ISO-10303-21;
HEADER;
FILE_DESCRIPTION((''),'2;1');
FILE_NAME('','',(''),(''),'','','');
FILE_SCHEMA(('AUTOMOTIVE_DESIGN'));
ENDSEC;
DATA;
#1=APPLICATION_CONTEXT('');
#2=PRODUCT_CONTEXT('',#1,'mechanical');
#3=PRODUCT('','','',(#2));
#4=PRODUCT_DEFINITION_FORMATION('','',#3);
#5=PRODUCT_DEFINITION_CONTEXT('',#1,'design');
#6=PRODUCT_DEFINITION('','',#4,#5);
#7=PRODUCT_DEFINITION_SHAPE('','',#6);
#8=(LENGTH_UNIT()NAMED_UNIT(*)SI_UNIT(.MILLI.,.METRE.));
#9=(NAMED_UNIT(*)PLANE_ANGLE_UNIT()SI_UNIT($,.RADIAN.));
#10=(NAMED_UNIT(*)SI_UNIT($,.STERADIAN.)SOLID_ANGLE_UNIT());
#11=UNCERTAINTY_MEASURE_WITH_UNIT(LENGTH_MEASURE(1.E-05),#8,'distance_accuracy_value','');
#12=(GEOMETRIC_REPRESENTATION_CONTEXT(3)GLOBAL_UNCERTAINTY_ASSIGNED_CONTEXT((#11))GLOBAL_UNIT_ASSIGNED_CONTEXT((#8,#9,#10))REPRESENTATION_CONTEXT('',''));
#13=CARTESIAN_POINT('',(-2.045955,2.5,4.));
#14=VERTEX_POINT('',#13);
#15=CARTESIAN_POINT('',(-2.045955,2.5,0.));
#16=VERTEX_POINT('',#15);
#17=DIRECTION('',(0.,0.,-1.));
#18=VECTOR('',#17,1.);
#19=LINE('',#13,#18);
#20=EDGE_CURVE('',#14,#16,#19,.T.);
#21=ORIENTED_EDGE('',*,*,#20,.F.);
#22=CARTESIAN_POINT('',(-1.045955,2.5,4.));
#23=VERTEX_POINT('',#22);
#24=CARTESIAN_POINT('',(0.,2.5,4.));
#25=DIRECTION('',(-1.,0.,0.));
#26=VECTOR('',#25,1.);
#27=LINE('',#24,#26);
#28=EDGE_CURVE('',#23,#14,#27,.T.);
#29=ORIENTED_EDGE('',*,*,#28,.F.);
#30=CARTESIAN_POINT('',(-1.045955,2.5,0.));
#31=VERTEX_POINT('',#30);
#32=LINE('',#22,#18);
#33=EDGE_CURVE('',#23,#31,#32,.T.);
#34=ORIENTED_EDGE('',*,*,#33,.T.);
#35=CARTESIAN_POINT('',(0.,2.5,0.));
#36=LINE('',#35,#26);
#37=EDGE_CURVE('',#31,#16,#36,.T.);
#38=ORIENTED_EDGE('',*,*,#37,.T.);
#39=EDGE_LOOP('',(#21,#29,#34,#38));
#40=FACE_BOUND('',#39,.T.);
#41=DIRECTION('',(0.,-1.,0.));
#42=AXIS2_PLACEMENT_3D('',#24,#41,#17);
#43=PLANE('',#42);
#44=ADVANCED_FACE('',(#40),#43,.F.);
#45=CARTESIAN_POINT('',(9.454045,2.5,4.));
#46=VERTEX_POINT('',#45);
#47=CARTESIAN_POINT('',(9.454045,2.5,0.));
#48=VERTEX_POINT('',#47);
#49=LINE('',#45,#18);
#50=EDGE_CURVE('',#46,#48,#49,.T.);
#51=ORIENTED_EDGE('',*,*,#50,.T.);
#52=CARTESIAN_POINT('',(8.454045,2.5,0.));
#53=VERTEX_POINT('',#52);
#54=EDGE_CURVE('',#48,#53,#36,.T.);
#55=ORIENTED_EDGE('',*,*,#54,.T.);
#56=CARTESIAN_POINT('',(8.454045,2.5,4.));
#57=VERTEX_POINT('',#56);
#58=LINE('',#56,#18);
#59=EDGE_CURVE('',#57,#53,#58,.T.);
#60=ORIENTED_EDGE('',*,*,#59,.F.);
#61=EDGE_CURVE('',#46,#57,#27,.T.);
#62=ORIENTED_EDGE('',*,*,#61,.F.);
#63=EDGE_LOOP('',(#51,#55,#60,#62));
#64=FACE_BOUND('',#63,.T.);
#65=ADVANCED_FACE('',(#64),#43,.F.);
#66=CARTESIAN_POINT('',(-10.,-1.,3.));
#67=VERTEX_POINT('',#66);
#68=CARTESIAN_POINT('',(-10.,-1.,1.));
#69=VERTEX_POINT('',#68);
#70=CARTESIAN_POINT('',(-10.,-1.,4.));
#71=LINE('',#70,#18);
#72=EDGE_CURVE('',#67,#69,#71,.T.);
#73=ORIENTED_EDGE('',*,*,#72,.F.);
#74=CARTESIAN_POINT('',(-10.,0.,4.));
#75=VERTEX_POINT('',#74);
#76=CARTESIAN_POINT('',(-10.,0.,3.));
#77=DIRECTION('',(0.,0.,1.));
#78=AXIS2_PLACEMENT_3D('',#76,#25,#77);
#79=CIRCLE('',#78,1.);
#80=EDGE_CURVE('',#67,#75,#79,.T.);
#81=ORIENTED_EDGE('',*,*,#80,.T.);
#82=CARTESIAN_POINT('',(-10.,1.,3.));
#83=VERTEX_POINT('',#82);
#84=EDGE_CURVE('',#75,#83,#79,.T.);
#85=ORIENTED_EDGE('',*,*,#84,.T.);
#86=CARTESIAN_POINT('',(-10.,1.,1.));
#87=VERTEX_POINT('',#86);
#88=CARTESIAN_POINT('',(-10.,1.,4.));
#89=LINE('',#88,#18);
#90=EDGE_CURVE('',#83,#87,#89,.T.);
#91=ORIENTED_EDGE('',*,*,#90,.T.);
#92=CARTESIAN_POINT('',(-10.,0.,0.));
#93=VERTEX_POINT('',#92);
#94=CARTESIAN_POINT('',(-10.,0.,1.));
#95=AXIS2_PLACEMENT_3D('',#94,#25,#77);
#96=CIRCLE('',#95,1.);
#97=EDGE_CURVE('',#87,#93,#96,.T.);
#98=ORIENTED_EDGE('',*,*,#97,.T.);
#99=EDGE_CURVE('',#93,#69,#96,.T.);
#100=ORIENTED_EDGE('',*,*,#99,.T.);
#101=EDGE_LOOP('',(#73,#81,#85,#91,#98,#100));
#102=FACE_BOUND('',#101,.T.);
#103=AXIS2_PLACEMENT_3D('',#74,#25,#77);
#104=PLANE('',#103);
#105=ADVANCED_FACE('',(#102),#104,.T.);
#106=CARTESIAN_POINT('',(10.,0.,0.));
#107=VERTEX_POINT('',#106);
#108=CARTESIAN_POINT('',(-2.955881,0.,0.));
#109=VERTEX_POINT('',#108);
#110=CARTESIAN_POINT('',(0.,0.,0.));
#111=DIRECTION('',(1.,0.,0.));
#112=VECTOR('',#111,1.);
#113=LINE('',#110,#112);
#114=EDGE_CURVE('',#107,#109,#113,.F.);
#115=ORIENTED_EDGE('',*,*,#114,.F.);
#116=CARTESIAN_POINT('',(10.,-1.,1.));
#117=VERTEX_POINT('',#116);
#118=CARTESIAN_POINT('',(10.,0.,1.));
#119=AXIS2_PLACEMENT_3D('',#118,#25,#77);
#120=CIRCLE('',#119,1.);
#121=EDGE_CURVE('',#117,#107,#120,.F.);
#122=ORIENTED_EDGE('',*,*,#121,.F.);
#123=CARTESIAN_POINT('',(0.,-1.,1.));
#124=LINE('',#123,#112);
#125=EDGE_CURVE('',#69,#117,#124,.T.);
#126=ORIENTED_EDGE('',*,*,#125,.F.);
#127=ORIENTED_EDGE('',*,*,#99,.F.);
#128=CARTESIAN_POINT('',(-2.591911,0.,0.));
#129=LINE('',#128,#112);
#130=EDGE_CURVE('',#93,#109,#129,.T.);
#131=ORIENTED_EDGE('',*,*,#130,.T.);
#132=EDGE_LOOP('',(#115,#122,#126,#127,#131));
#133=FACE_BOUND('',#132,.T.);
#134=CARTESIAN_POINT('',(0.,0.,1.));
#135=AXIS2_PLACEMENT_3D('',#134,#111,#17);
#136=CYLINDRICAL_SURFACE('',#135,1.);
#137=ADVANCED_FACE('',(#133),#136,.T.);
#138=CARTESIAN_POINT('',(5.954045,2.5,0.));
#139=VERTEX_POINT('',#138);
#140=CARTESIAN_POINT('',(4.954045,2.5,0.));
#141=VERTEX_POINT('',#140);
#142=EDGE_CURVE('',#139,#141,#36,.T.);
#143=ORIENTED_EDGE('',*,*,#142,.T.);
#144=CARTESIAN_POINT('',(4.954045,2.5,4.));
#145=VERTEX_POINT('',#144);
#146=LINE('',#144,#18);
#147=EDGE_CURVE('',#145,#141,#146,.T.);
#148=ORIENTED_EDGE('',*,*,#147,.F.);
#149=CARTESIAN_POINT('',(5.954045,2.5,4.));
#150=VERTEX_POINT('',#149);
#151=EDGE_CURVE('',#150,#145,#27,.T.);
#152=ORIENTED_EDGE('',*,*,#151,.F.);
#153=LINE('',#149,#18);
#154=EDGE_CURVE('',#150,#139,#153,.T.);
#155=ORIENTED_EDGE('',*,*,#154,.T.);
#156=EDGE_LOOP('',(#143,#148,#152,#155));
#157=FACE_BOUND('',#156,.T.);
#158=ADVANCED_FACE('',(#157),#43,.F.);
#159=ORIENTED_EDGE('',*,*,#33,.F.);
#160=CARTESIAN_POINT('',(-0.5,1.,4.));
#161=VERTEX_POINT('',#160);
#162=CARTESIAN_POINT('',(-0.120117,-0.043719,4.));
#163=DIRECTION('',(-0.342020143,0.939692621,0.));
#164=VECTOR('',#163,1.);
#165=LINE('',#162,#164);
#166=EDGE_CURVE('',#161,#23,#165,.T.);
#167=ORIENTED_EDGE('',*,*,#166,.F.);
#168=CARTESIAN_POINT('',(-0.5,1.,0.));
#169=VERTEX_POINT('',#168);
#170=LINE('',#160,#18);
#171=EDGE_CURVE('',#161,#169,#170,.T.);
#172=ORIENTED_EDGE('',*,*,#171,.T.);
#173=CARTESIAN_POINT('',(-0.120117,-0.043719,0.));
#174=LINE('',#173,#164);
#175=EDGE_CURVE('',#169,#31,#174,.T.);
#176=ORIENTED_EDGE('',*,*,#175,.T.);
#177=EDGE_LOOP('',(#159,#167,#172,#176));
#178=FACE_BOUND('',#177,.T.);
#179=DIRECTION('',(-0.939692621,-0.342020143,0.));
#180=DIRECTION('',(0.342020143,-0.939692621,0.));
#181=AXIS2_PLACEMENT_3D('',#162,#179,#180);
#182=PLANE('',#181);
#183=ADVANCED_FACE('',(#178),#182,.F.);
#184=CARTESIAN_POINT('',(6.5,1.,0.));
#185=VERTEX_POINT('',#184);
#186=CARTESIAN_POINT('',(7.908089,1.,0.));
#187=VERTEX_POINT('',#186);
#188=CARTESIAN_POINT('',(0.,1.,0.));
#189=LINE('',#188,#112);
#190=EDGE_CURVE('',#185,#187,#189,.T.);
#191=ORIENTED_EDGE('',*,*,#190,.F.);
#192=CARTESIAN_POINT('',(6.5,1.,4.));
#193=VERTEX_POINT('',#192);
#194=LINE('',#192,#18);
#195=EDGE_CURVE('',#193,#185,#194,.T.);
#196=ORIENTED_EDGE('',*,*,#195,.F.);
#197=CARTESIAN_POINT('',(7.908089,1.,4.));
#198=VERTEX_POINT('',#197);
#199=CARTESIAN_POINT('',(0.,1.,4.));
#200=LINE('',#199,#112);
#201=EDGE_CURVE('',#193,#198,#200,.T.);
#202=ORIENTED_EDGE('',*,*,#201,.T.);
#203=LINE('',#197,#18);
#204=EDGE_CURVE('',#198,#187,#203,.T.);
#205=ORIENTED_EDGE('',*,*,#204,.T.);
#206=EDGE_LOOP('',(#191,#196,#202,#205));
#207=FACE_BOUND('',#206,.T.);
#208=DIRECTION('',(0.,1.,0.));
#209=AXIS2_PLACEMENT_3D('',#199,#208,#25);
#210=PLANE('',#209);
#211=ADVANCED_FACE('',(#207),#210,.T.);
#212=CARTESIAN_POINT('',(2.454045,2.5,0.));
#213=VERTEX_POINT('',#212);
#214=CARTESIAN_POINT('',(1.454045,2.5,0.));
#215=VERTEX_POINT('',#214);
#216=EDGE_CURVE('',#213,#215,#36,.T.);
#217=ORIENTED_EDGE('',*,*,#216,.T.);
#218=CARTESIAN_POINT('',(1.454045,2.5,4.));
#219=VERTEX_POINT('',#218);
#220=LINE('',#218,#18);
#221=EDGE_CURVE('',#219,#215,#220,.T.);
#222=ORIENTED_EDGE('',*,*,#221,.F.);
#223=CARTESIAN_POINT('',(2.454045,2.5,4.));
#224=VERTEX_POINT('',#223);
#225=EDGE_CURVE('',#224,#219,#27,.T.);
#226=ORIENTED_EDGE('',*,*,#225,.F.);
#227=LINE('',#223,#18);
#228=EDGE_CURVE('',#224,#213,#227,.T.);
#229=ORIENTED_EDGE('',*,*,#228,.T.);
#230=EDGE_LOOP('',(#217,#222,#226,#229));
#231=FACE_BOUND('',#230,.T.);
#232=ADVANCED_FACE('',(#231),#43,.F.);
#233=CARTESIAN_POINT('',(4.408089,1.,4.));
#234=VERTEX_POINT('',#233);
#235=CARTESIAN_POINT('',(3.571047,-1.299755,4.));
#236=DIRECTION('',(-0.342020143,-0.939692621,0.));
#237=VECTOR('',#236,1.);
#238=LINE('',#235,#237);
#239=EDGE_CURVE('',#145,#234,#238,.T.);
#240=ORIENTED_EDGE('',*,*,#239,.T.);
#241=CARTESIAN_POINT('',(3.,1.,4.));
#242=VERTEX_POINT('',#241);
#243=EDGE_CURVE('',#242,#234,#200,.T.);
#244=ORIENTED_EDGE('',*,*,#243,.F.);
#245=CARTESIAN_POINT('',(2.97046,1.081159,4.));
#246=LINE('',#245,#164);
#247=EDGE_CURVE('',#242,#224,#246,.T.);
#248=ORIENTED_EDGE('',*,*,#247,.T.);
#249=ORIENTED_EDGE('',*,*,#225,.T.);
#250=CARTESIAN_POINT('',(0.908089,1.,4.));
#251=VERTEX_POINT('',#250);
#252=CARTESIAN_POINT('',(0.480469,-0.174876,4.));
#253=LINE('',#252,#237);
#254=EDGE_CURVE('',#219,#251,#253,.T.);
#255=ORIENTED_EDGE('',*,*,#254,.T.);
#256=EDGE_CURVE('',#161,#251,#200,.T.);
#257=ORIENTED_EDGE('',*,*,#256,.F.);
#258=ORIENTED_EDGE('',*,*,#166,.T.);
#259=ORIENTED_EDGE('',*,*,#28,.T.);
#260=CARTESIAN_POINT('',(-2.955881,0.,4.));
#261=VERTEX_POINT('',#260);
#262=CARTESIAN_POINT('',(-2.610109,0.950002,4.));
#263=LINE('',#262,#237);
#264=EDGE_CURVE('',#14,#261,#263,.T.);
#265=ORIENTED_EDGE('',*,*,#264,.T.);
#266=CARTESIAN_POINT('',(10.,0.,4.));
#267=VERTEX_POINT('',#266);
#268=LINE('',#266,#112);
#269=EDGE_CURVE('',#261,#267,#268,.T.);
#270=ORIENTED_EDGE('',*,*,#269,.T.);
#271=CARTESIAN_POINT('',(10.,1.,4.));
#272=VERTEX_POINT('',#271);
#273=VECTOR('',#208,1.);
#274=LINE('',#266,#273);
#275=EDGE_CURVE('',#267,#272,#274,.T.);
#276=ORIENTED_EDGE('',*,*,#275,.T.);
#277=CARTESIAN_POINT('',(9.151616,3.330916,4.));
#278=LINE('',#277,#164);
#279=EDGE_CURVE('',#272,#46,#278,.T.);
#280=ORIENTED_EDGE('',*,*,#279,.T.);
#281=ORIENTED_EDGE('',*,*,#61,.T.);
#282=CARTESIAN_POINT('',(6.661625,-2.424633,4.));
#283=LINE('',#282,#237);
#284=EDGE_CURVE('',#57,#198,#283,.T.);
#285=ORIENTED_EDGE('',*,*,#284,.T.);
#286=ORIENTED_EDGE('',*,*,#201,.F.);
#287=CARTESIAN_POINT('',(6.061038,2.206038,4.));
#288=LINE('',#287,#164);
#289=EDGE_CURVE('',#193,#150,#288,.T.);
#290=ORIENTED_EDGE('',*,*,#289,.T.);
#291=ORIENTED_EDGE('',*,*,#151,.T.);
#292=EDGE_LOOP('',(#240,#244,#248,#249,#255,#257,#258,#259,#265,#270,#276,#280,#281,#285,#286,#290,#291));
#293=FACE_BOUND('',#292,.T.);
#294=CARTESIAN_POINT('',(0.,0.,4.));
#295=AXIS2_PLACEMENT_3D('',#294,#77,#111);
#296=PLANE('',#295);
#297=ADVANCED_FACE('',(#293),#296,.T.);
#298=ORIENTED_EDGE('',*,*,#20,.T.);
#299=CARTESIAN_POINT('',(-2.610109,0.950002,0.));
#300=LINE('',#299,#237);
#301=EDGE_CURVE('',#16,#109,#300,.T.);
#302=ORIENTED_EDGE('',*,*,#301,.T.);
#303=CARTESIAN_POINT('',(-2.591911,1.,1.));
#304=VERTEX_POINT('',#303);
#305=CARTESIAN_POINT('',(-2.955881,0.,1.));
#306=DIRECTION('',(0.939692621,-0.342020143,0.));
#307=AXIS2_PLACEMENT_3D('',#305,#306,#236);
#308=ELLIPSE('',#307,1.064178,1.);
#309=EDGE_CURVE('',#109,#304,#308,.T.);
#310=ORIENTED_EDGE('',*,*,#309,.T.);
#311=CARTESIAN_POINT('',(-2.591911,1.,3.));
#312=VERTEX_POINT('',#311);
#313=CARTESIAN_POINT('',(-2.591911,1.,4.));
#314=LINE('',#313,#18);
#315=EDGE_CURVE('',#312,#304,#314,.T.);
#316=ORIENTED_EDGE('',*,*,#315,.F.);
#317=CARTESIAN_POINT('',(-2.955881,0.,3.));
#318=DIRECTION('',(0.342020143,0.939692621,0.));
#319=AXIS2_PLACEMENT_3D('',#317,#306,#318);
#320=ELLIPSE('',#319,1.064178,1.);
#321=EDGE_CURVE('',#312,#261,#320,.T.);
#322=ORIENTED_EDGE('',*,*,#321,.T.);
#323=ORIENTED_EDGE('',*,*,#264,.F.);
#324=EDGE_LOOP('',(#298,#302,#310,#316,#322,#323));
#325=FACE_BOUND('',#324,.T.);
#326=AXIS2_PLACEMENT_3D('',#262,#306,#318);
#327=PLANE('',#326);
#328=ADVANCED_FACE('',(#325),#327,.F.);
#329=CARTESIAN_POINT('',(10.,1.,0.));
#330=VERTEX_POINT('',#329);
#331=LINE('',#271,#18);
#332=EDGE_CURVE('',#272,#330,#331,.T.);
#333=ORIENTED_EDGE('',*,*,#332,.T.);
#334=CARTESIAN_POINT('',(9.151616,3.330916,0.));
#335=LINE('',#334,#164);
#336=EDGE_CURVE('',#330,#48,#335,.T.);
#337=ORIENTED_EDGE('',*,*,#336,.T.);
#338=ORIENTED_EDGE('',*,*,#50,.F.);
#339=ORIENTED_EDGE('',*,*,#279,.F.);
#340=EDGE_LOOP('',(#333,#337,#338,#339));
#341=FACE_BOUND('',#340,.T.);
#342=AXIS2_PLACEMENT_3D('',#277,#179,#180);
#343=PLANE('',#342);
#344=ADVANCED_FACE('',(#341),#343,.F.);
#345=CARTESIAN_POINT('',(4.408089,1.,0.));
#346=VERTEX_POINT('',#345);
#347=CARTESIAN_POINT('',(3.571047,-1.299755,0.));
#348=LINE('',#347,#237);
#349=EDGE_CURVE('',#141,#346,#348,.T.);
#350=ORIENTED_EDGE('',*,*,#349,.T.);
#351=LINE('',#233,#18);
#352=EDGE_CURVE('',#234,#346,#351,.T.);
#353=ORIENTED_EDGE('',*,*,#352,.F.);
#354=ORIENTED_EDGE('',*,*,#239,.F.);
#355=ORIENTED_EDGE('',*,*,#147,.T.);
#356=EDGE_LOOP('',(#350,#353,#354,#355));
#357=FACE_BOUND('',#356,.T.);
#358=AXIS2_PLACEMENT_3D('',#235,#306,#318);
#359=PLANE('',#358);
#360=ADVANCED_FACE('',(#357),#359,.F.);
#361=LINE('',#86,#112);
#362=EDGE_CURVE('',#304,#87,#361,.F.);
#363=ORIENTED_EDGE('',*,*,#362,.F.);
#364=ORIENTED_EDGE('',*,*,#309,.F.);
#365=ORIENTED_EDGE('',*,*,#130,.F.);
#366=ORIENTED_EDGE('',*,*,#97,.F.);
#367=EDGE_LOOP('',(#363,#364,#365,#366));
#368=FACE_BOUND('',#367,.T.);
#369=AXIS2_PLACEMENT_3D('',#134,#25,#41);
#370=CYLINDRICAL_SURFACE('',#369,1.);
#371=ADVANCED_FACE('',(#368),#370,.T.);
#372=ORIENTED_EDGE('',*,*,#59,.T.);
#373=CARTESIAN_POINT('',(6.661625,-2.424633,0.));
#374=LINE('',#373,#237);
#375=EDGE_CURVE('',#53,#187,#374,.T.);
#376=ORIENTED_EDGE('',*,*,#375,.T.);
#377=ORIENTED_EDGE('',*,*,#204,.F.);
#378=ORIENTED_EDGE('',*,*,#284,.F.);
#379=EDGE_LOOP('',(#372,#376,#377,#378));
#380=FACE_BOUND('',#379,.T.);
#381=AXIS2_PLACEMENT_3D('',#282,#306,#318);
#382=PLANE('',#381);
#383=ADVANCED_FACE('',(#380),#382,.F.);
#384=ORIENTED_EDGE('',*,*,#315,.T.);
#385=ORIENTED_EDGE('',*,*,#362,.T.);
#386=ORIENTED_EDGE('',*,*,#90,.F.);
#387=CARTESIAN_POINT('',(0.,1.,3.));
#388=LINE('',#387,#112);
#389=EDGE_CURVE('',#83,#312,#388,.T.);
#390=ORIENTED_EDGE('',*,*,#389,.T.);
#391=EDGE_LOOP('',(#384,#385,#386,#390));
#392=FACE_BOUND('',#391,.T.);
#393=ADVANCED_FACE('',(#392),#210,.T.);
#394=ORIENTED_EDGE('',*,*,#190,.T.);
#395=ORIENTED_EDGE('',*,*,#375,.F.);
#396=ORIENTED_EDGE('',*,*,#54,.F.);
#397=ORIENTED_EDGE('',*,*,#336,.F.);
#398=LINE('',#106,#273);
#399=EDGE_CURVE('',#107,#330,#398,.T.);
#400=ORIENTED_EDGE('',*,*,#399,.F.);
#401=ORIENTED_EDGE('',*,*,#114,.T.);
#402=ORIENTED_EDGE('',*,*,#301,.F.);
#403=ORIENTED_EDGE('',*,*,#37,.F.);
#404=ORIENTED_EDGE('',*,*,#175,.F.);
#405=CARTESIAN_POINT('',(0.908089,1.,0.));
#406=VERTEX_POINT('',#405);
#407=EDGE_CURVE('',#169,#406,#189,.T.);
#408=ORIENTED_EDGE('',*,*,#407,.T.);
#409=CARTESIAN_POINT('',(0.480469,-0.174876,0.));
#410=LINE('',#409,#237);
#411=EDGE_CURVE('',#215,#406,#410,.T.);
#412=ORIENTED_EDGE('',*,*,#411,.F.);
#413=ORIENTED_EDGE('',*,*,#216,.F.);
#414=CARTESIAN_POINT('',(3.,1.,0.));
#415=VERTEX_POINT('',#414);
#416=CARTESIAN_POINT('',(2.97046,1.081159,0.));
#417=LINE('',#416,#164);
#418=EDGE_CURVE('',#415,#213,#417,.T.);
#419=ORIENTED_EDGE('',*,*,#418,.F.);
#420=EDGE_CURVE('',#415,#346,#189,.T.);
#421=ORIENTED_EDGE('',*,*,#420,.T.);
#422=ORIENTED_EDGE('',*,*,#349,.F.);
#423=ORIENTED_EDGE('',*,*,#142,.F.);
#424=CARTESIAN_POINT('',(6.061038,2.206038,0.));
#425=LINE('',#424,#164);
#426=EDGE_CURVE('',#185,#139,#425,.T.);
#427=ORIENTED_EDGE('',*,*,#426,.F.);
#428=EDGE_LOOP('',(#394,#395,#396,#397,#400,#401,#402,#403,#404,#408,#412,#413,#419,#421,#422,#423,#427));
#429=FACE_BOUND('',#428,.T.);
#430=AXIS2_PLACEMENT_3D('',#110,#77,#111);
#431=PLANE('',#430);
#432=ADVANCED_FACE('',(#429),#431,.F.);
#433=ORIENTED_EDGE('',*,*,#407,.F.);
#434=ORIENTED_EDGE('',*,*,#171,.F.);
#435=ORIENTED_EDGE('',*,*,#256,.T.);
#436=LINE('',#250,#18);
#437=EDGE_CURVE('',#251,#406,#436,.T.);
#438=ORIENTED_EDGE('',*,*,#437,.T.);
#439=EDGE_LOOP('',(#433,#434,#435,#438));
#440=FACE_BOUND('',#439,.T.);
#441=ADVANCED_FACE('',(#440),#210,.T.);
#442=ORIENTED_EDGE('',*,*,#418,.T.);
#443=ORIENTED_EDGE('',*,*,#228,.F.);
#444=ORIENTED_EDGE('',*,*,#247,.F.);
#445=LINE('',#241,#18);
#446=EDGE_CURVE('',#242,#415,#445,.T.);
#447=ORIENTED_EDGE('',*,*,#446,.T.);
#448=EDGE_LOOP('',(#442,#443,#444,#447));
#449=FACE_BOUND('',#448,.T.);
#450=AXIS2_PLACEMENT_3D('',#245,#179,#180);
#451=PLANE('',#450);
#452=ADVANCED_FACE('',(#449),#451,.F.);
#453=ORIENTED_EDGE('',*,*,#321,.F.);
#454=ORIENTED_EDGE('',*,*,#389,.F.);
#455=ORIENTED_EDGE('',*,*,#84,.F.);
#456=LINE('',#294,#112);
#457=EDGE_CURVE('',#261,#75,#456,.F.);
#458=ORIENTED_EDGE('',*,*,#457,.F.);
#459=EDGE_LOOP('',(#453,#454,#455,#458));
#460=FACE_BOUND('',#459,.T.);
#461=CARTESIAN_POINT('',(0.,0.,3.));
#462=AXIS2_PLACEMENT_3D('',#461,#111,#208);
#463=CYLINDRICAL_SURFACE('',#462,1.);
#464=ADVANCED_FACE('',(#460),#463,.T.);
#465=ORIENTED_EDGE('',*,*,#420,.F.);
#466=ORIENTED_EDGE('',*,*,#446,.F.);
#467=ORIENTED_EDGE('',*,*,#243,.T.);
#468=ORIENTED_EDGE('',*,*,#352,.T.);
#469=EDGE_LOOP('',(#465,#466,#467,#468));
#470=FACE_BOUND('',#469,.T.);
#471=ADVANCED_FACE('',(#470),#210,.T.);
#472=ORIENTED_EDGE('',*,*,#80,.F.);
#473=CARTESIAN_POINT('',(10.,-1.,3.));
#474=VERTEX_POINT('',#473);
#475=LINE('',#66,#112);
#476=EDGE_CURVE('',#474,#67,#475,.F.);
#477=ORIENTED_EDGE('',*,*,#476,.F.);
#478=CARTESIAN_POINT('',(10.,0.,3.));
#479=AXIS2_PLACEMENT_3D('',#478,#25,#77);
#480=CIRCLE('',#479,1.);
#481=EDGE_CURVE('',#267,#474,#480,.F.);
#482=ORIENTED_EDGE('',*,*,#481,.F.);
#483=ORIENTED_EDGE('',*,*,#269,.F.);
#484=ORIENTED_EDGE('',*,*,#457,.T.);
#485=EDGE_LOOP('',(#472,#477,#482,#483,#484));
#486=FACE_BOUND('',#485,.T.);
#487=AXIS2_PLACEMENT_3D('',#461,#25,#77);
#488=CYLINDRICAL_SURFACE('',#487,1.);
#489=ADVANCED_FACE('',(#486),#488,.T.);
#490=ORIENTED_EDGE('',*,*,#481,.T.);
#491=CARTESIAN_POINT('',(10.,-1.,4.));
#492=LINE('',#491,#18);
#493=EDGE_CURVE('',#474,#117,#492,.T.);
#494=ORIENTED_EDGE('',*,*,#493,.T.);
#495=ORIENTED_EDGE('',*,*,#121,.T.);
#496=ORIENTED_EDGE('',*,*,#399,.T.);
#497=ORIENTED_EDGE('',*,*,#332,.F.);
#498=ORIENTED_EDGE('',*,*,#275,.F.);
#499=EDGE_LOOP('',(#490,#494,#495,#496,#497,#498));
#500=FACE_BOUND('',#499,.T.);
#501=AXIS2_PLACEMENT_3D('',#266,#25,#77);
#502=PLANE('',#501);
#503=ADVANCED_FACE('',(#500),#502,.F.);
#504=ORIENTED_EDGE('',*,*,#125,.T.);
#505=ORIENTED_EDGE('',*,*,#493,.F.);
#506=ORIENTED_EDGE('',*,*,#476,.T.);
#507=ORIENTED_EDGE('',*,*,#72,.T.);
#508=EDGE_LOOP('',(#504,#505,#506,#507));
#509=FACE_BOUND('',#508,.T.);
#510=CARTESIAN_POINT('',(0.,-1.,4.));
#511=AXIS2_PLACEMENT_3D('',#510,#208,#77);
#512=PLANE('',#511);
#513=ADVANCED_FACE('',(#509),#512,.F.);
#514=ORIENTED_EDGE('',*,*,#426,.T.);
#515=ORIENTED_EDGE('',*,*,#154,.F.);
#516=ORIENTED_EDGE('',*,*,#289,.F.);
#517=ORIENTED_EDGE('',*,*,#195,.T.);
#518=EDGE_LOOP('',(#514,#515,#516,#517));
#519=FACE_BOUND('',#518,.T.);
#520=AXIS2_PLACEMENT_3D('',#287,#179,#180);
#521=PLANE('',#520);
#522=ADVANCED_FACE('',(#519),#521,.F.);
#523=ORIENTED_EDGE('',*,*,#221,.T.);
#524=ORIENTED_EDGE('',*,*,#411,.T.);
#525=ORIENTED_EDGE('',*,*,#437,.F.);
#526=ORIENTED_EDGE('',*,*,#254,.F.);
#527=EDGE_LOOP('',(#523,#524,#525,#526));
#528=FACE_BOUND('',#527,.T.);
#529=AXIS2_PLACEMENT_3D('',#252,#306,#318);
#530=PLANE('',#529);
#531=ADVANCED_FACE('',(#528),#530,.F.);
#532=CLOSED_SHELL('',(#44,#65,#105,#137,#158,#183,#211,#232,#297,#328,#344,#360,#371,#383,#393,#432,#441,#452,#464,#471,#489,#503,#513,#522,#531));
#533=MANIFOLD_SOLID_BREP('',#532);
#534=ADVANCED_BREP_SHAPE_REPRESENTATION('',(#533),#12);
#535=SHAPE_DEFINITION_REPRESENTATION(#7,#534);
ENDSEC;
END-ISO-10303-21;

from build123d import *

# Parameters (mm, degrees)
BOSS_EXTRUDE1_DEPTH = 4
FILLET1_R           = 1


with BuildPart() as part:
    # Sketch1 → Boss-Extrude1 (new body)
    with BuildSketch(Plane.XY):
        Polygon((6.5, 1), (7.908089297, 1), (8.454044649, 2.5), (9.454044649, 2.5), (10, 1), (10, -1), (-10, -1), (-10, 1), (-2.591910703, 1), (-2.045955351, 2.5), (-1.045955351, 2.5), (-0.5, 1), (0.908089297, 1), (1.454044649, 2.5), (2.454044649, 2.5), (3, 1), (4.408089297, 1), (4.954044649, 2.5), (5.954044649, 2.5), align=None)
    extrude(amount=BOSS_EXTRUDE1_DEPTH)

    # Fillet1
    fillet1_edges = [part.edges().sort_by_distance(p)[0] for p in [
        (0, -1, 4),
        (0, -1, 0),
        (-6.295955351, 1, 0),
        (-6.295955351, 1, 4),
    ]]
    fillet(fillet1_edges, radius=FILLET1_R - 0.0001)  # a hair under: the kernel refuses the full size


solid = part.part
